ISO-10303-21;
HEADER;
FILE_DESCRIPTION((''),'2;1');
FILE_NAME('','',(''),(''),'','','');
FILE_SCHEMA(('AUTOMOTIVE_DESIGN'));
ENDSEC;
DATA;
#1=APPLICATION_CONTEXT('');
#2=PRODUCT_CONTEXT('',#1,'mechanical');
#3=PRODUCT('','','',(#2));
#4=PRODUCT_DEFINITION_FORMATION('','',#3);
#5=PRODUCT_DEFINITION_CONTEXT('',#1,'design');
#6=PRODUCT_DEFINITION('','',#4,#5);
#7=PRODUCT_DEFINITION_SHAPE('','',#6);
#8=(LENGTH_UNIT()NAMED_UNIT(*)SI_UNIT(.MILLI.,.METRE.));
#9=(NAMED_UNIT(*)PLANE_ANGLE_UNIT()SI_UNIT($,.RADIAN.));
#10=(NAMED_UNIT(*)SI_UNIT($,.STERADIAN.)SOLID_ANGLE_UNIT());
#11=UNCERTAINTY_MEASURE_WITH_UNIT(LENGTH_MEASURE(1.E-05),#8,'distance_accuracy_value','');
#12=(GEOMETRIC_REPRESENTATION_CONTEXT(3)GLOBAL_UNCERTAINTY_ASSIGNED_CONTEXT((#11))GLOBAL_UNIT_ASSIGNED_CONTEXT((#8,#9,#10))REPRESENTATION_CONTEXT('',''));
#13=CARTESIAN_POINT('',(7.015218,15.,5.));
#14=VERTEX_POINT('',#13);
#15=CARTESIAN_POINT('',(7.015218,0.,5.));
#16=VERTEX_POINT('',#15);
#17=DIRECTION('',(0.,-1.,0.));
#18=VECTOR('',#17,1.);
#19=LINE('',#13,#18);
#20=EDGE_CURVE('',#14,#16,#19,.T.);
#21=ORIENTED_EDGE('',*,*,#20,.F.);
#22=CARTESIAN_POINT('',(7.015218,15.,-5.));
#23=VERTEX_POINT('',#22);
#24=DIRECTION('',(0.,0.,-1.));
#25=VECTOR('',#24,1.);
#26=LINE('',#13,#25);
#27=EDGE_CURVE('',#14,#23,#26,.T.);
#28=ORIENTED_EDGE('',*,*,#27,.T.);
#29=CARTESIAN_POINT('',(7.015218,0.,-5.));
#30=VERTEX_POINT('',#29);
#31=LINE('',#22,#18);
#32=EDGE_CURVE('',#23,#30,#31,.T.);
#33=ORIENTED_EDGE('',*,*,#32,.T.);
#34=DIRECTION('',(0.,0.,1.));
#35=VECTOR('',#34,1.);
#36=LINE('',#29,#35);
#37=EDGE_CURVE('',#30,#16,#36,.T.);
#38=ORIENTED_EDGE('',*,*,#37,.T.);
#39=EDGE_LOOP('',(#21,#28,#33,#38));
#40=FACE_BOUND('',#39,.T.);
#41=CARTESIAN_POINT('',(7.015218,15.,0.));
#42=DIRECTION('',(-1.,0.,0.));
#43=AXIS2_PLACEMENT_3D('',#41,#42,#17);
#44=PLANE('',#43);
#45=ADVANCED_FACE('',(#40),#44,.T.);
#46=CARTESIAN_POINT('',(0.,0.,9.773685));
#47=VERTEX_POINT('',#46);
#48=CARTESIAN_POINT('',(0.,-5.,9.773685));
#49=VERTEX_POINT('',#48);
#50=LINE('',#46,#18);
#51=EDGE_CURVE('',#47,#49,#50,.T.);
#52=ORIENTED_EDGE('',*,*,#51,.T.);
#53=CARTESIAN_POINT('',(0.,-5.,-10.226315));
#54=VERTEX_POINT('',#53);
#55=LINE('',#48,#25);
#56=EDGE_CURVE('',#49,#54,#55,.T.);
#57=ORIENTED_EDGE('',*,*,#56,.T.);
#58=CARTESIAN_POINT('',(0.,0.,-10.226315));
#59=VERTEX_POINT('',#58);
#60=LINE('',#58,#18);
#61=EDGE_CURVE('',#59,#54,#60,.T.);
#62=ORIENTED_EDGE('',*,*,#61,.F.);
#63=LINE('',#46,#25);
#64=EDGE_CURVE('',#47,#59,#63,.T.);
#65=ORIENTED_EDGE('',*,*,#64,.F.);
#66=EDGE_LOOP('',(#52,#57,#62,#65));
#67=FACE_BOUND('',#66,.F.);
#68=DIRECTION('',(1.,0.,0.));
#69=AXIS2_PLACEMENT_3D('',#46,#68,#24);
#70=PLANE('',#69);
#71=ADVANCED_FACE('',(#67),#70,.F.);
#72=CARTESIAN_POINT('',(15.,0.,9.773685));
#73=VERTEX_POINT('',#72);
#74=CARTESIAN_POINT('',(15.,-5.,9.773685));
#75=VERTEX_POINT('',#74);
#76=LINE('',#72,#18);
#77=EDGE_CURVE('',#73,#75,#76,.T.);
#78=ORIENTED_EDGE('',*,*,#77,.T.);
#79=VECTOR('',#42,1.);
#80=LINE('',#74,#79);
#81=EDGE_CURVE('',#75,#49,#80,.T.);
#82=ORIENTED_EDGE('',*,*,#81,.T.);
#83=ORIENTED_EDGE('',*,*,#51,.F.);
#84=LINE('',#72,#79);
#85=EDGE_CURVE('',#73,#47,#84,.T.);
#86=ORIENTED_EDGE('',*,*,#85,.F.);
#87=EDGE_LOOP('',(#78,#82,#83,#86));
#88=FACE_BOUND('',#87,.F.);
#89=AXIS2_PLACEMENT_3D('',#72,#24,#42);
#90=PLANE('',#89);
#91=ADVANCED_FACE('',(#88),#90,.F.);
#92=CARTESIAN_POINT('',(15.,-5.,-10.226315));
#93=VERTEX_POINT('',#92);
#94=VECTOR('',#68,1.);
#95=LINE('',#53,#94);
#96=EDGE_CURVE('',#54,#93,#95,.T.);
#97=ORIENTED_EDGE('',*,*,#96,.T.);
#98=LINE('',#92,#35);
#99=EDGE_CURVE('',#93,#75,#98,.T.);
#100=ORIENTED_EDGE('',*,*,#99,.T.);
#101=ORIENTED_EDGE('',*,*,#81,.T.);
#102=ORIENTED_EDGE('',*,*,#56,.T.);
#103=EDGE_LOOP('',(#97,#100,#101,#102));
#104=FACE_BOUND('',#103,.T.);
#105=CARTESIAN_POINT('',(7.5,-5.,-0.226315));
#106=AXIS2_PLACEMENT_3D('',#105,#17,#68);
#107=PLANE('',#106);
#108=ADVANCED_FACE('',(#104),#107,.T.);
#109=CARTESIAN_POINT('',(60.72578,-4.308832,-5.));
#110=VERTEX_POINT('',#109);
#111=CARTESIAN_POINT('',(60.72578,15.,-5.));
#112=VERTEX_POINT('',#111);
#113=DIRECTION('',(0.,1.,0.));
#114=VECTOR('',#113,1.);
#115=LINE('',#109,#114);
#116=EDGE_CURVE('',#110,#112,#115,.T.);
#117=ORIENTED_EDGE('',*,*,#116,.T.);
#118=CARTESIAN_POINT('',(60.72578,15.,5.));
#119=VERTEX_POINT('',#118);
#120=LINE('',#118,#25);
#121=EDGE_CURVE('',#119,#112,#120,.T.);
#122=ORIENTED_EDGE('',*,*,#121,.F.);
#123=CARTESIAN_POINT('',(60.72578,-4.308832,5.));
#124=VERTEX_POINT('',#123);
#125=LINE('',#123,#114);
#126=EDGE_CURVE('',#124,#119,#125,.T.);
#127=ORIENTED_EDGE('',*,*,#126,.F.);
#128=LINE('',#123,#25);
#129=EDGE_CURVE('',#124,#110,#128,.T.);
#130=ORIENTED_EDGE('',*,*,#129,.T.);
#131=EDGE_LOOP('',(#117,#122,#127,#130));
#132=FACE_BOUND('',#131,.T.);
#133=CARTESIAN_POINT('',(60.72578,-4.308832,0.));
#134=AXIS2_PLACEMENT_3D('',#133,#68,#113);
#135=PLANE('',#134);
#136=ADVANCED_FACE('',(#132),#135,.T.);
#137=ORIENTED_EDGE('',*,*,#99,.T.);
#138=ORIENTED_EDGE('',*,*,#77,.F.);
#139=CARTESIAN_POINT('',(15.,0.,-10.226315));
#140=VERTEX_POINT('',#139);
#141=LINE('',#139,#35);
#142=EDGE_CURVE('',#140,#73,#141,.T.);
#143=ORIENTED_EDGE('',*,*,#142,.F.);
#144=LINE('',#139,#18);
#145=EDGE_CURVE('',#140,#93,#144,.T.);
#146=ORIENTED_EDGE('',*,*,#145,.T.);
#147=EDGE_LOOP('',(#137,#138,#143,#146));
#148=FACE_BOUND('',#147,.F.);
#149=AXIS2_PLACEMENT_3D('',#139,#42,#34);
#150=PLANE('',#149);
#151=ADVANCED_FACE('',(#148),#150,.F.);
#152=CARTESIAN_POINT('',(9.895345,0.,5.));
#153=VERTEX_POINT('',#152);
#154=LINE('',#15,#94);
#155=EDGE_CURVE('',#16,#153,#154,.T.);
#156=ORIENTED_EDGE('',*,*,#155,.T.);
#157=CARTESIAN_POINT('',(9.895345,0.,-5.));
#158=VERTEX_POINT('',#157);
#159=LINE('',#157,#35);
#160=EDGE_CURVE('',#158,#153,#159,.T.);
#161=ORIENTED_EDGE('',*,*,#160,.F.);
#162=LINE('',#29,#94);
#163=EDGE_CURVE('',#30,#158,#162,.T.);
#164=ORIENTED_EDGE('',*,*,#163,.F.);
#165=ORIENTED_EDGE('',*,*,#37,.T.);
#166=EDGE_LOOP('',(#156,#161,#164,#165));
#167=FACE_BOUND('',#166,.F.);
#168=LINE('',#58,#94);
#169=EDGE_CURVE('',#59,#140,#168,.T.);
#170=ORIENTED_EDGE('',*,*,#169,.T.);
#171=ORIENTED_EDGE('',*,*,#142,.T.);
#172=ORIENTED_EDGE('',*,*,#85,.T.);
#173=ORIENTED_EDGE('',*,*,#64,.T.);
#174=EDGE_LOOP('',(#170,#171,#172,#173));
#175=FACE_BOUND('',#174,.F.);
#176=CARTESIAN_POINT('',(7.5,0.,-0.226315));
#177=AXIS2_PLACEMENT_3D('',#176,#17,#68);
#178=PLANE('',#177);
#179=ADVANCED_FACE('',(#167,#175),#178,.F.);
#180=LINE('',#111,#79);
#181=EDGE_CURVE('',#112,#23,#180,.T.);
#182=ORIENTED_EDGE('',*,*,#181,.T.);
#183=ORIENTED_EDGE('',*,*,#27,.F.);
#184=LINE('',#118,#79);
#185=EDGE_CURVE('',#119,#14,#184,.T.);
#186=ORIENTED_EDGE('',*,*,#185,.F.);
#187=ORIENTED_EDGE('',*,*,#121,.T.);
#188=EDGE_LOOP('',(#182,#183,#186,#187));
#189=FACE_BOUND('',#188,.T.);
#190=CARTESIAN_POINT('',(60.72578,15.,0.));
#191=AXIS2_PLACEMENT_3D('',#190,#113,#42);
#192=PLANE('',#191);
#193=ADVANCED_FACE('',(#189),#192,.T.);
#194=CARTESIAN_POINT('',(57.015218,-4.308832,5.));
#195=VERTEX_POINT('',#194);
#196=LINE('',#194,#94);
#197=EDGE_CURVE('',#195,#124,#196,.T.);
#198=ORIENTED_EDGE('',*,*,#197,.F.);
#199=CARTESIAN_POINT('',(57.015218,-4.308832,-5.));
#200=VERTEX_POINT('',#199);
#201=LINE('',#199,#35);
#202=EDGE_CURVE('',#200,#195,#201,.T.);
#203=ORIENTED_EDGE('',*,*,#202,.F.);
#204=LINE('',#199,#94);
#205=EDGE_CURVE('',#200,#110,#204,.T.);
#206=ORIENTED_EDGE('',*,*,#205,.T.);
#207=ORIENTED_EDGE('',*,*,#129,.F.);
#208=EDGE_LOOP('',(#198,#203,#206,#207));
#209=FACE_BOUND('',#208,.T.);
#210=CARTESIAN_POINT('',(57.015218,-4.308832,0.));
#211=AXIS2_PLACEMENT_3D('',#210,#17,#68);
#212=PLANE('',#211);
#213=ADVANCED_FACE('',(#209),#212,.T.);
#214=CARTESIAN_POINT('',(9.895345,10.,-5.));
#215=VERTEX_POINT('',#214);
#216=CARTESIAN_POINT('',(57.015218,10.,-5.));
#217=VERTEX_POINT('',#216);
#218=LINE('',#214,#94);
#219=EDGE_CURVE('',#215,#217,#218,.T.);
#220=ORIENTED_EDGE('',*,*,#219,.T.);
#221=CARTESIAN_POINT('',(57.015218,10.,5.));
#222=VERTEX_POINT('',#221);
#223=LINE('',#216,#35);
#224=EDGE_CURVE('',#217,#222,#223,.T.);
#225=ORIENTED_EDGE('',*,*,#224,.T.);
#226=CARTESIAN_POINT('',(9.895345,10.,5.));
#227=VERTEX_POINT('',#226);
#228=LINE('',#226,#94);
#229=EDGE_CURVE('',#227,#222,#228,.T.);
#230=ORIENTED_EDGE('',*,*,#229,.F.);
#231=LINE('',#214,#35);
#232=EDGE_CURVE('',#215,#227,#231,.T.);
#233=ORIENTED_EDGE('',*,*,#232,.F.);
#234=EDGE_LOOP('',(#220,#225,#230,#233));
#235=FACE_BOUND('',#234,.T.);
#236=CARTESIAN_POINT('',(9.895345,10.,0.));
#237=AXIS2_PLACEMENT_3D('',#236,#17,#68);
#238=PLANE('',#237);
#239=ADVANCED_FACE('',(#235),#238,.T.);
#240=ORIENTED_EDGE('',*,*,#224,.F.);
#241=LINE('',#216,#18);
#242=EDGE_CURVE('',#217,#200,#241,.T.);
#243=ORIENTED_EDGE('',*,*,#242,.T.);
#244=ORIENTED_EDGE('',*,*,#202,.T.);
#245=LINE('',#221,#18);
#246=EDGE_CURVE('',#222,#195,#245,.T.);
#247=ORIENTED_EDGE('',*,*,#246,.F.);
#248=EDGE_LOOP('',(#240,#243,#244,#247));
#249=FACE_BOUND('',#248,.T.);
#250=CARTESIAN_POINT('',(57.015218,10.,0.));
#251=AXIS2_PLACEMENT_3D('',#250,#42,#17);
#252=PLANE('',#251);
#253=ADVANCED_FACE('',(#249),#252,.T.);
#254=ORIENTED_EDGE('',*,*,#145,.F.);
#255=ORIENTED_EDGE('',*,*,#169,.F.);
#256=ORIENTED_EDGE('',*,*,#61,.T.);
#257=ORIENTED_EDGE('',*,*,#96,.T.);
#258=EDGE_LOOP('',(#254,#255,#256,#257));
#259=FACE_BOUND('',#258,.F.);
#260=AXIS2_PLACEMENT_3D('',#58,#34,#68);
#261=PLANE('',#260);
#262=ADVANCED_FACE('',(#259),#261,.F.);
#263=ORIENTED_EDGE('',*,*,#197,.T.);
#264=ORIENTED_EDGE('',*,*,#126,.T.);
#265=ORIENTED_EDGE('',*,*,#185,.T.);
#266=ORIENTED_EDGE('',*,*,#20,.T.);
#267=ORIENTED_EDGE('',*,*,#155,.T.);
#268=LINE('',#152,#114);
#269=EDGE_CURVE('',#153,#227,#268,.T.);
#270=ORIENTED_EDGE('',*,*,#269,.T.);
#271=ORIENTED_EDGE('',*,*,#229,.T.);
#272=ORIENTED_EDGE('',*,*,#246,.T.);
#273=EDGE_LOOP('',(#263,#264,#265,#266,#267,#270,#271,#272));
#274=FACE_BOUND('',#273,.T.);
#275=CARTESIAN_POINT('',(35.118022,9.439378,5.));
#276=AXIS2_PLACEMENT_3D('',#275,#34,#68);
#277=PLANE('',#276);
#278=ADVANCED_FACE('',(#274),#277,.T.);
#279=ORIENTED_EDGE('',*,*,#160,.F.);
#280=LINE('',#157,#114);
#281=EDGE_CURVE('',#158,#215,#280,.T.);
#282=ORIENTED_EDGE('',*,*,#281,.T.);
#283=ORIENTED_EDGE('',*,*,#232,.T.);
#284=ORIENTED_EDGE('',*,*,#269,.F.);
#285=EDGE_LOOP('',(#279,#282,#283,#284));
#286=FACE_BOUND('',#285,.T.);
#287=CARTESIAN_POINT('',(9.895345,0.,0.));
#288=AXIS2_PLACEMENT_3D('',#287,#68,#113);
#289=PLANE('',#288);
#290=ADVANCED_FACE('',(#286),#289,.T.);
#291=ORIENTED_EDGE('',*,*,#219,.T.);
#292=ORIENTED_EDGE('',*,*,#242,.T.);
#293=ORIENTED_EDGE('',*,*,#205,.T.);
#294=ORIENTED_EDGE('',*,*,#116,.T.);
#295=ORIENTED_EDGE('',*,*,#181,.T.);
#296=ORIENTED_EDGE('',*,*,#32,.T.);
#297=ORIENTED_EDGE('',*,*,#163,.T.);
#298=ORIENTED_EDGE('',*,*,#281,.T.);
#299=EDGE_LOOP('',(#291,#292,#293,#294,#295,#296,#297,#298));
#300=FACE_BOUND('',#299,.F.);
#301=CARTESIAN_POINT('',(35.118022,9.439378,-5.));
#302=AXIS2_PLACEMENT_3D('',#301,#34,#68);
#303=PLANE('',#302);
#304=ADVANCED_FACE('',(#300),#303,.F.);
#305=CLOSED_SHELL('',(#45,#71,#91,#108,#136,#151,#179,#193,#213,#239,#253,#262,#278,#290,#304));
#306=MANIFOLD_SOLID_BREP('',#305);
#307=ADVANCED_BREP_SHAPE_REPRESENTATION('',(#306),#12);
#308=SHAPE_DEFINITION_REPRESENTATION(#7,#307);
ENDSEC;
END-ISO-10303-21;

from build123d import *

# Parameters (mm, degrees)
F1_DEPTH      = 5
F3_DEPTH      = 5
F3_DEPTH_BACK = 5


# Not quite as in the source:
# - a feature names something its author has since deleted; it is built from what else it names


with BuildPart() as f1:
    # F0 (on Front) → F1 (new body)
    with BuildSketch(Plane.XZ):
        Polygon((0, 9.7736853705), (0, 0), (0, -10.2263146295), (15, -10.2263146295), (15, 9.7736853705), align=None)
    extrude(amount=F1_DEPTH)

    # F2 (on Top) → F3 (join, two sides)
    with BuildSketch(Plane.XY) as f3_sk:
        Polygon((7.0152175973, 15), (7.0152175973, 0), (9.8953448171, 0), (9.8953448171, 10), (57.0152175973, 10), (57.0152175973, -4.3088319683), (60.7257795132, -4.3088319683), (60.7257795132, 15), align=None)
    extrude(amount=F3_DEPTH)
    extrude(f3_sk.sketch, amount=-F3_DEPTH_BACK)


solid = f1.part
